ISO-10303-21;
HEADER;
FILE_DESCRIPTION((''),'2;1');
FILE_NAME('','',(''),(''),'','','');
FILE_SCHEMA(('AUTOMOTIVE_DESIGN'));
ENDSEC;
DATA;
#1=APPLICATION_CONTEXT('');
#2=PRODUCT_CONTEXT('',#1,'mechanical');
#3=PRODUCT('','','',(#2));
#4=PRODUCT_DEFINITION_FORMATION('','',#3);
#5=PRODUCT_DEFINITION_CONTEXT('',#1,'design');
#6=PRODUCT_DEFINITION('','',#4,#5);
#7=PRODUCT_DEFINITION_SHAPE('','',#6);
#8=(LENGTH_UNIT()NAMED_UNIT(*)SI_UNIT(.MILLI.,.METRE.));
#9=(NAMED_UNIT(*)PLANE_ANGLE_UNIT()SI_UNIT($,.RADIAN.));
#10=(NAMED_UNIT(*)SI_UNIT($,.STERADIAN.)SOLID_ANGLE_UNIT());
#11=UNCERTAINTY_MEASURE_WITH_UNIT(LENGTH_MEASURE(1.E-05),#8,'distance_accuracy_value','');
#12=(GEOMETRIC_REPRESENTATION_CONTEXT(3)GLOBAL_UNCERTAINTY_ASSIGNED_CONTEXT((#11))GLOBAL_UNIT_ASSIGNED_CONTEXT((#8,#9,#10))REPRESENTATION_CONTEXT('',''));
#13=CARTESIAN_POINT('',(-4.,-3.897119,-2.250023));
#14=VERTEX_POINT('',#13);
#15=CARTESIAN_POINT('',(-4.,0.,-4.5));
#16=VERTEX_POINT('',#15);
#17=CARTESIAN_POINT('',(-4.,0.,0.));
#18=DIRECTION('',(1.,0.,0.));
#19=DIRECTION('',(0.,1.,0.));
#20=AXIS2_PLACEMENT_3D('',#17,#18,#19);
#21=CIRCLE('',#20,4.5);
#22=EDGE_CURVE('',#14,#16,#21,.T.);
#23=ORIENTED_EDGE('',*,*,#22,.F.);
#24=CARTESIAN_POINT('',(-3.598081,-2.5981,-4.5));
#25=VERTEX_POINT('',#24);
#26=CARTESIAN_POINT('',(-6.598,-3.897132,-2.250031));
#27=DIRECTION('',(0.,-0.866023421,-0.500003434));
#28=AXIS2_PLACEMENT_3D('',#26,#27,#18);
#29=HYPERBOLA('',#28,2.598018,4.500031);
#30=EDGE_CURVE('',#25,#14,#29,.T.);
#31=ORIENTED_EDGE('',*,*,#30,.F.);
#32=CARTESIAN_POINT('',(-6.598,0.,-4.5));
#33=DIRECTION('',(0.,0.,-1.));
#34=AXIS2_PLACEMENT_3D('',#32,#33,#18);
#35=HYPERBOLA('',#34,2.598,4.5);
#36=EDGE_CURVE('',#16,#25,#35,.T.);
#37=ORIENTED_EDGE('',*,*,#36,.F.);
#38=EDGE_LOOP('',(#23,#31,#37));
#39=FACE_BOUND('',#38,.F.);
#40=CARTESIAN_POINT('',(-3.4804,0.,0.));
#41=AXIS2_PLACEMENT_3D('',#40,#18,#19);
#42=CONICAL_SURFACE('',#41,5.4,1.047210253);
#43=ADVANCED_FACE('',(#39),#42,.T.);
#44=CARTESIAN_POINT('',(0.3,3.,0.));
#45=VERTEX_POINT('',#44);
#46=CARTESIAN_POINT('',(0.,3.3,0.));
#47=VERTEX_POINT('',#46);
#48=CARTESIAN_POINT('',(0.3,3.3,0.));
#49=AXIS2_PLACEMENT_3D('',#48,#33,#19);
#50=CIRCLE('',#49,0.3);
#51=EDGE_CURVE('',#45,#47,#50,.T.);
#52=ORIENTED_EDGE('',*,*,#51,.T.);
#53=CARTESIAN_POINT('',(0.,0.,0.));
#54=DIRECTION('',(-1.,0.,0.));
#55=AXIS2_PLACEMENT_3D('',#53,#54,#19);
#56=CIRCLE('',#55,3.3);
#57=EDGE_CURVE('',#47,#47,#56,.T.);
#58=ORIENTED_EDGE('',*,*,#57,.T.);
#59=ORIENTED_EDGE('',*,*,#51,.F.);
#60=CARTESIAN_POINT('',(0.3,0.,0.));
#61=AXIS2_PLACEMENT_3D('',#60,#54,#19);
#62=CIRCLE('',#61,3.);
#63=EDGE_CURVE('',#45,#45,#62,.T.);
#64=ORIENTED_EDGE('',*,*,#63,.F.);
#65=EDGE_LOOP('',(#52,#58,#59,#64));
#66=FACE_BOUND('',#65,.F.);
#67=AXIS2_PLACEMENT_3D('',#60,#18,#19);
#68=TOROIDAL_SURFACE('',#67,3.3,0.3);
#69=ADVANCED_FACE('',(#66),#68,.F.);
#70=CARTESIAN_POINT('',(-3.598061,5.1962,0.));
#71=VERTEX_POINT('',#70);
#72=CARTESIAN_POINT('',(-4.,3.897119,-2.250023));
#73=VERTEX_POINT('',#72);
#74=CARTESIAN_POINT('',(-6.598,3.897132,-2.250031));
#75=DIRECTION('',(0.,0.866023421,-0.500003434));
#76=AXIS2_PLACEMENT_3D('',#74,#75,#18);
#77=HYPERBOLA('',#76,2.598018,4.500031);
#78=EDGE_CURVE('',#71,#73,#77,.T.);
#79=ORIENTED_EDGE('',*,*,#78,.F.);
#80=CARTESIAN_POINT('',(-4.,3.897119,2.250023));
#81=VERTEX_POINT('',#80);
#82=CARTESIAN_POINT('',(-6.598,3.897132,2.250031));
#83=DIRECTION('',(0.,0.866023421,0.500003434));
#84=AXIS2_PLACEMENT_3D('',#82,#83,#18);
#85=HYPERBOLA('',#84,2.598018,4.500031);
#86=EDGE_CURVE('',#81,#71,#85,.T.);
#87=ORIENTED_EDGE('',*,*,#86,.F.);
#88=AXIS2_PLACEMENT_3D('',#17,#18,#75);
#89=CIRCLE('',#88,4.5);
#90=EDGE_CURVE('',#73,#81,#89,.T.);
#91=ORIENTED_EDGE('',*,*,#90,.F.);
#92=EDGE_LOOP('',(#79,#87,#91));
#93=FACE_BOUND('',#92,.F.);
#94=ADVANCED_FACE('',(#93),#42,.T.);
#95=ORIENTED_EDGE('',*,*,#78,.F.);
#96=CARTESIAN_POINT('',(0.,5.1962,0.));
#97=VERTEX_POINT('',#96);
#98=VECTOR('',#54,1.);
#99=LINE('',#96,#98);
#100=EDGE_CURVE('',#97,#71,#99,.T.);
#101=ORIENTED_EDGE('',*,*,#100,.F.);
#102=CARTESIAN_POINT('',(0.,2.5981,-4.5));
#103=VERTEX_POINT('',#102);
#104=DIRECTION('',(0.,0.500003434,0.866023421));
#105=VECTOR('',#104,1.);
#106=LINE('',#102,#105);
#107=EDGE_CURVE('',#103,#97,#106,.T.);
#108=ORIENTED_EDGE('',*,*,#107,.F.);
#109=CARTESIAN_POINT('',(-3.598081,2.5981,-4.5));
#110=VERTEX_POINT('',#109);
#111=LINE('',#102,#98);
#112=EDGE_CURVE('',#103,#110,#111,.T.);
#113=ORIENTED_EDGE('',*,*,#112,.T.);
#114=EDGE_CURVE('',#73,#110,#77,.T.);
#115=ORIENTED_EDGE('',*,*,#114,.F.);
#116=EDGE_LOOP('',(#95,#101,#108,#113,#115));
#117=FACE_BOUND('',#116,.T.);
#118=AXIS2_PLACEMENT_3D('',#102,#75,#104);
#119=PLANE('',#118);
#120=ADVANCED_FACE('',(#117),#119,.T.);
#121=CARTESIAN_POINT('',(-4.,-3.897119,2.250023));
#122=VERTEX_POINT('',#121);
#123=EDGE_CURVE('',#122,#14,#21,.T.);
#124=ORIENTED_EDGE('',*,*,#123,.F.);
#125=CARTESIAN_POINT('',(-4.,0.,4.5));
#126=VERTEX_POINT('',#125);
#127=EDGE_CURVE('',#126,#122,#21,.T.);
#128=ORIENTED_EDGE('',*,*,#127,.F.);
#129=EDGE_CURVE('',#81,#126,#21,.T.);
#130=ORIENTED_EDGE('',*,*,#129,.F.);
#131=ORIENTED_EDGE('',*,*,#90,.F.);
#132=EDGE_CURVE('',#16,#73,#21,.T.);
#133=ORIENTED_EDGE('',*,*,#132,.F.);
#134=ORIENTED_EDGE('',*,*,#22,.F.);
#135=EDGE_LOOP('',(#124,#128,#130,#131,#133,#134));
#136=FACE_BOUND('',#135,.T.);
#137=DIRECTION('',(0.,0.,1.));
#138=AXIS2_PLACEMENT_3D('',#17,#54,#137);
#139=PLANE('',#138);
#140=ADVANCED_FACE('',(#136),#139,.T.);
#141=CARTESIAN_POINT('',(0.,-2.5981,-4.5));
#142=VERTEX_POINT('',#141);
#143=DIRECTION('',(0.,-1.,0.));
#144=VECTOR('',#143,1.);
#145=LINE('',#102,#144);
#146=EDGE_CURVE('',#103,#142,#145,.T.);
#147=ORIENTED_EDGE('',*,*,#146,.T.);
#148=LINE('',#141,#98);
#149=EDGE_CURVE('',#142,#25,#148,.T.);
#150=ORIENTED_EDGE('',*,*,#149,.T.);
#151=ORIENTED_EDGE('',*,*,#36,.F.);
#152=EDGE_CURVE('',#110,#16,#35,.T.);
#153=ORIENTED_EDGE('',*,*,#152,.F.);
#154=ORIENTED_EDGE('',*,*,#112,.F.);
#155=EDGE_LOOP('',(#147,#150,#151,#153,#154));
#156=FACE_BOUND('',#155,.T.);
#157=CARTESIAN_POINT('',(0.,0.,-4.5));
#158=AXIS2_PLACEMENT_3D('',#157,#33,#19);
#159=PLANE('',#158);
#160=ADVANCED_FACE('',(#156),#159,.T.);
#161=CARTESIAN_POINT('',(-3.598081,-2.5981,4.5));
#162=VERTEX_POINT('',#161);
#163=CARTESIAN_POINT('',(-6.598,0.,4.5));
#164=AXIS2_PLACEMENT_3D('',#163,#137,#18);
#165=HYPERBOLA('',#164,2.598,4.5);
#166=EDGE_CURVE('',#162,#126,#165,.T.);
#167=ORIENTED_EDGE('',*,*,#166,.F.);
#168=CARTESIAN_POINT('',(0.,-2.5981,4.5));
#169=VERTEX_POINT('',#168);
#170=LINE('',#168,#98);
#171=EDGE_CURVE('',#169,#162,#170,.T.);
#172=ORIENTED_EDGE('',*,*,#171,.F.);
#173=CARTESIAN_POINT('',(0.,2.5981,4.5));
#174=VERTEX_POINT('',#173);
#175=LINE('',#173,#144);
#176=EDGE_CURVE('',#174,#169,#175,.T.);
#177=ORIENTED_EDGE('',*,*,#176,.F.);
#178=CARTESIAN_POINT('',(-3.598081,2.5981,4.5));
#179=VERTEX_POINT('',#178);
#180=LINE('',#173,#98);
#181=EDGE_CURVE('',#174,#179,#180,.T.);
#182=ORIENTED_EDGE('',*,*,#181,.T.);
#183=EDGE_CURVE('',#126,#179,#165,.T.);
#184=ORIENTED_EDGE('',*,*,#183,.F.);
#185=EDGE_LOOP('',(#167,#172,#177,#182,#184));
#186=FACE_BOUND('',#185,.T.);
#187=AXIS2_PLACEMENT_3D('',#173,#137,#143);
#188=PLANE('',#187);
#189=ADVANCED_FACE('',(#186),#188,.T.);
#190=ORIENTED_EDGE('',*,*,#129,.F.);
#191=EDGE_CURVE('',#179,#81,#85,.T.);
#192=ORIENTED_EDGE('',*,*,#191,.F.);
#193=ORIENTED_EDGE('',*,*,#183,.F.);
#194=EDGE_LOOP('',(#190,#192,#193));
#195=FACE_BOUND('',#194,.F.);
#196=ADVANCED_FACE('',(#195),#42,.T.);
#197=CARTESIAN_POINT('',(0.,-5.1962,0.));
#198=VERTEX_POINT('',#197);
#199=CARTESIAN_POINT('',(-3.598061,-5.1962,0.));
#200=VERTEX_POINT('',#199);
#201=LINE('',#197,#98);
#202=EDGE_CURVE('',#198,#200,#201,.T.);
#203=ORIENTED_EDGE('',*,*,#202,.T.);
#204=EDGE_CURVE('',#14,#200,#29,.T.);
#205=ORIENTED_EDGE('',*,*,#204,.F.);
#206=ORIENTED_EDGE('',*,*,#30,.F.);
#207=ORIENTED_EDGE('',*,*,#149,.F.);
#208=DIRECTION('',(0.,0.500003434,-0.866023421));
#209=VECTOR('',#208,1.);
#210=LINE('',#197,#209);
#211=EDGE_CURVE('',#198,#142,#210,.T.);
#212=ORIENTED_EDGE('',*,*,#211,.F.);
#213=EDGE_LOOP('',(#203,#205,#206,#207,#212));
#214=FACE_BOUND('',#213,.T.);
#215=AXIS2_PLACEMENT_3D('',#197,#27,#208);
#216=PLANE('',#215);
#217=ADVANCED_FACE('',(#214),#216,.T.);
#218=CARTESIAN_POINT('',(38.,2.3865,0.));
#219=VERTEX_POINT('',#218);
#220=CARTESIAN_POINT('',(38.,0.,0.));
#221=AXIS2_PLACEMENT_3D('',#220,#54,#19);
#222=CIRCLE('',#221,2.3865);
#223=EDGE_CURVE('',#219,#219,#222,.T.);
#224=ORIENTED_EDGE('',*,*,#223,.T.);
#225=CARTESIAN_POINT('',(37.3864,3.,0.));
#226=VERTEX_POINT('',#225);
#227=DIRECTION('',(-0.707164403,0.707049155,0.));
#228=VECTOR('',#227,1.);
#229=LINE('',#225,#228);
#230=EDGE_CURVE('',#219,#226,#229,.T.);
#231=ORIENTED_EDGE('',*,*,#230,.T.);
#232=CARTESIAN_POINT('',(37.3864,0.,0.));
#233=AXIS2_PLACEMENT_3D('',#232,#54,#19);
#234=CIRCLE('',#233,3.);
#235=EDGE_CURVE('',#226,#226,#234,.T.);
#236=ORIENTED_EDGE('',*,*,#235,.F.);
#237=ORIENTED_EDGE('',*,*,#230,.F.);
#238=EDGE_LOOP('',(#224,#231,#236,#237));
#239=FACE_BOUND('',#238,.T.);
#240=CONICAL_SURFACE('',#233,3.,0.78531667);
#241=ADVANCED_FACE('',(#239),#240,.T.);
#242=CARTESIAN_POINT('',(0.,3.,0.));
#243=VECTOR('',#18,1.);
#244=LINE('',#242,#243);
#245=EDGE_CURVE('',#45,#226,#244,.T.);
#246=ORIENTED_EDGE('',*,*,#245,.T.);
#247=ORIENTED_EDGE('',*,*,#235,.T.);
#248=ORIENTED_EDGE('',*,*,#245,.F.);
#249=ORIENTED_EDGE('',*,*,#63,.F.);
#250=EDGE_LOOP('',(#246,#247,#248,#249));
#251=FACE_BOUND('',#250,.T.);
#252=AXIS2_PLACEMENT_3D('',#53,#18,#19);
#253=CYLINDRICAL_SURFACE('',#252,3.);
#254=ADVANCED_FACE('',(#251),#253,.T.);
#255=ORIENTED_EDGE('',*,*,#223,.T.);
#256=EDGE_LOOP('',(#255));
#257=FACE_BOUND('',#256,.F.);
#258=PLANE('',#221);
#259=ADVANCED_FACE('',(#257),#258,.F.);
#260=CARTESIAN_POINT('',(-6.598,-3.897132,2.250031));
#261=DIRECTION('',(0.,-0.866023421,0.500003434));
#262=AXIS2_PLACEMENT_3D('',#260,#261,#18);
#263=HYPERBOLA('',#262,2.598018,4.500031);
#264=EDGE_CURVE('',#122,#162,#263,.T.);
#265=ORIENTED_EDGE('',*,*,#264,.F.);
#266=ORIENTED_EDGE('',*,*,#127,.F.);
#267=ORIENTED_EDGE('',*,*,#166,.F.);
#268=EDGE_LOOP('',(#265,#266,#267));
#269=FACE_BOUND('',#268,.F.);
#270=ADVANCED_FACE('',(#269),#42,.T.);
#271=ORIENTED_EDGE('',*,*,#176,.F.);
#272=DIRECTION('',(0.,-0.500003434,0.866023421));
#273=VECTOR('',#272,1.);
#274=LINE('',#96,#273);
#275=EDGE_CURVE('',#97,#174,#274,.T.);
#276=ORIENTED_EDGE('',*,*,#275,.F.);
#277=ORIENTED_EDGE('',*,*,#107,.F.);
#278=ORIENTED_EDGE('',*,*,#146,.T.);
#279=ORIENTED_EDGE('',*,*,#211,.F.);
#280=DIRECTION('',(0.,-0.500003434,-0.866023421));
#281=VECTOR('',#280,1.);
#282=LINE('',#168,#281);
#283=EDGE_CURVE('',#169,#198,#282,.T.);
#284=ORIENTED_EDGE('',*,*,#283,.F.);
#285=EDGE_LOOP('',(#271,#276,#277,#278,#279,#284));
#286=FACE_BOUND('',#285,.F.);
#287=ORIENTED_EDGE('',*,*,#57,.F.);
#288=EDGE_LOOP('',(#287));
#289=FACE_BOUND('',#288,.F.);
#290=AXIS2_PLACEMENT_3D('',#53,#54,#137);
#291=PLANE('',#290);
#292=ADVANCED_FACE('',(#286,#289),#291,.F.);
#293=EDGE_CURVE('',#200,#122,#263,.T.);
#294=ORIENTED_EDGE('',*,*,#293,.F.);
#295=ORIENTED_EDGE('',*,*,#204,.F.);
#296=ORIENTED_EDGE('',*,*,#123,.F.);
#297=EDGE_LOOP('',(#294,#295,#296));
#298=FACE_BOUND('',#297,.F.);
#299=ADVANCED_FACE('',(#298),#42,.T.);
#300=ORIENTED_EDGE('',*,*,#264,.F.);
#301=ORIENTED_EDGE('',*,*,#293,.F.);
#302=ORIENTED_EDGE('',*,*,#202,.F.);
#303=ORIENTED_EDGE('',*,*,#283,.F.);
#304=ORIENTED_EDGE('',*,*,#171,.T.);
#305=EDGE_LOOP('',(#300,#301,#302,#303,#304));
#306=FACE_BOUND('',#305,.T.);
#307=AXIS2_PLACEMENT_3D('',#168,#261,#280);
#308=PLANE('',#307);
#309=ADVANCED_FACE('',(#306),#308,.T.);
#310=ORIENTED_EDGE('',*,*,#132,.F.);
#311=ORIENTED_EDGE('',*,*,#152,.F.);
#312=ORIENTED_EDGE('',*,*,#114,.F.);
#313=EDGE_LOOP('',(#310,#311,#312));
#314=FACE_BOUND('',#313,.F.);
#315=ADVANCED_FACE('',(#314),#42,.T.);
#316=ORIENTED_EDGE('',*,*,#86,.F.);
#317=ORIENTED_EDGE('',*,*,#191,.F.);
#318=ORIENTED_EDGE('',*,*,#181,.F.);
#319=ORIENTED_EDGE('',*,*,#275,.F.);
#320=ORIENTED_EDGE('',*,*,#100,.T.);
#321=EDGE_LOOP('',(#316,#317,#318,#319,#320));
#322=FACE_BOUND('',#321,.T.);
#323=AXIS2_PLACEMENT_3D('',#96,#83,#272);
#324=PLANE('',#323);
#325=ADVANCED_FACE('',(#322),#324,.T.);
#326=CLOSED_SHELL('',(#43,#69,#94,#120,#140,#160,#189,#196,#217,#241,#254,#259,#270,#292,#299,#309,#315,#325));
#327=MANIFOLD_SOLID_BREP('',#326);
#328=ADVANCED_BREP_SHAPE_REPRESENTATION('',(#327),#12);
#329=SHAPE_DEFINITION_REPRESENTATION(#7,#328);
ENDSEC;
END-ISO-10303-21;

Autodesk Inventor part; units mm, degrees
ref_plane "YZ Plane" through (0, 0, 0) normal (1, 0, 0) x (0, 1, 0)
ref_plane "XZ Plane" through (0, 0, 0) normal (0, 1, 0) x (-1, 0, 0)
sketch "Sketch1" plane through (0, 0, 0) normal (0, 0, 1) x (1, 0, 0)
  line L0 (0, 3) -> (38, 3)
  line L1 (38, 3) -> (38, 0)
  line L2 (38, 0) -> (0, 0)
  line L3 (-7.6, 0) -> (45.6, 0) projected
  line L4 (0, -0.6) -> (0, 3.6) projected
  line L5 (0, 3) -> (0, 0)
  dimension "d2" = 6
  dimension "d59" = 38
revolve "Body" add sketch "Sketch1" angle 360 about axis through (38, 0, 0) along (-1, 0, 0)
sketch "Sketch2" plane through (0, 0, 0) normal (-1, 0, 0) x (0, 0, 1)
  line L0 (0, 5.1962) -> (4.5, 2.5981)
  line L1 (4.5, 2.5981) -> (4.5, -2.5981)
  line L2 (4.5, -2.5981) -> (0, -5.1962)
  line L3 (0, -5.1962) -> (-4.5, -2.5981)
  line L4 (-4.5, -2.5981) -> (-4.5, 2.5981)
  line L5 (-4.5, 2.5981) -> (0, 5.1962)
  line L6 (-6.3, 0) -> (6.3, 0) projected
  line L7 (0, 7.2746) -> (0, -7.2746) projected
  point P0 (0, 0)
  point P1 (0, 0)
  dimension "d11" = 9
extrude "Head" add sketch "Sketch2" along normal blind 4
sketch "Sketch4" plane through (0, 0, 0) normal (0, 0, 1) x (1, 0, 0)
  line L0 (-3.4804, 5.4) -> (-4, 4.5)
  line L1 (-1.1, 0) -> (-0.234, 0)
  line L2 (-4.7532, 0) -> (0.5192, 0) projected
  line L3 (-4, 5.4) -> (-3.4804, 5.4)
  line L4 (-4, 4.5) -> (-4, 5.4)
  line L5 (0, 6.48) -> (0, -1.08) projected
  dimension "d65" = 9
  dimension "d67" = 30
  dimension "d68" = 10.8
  dimension "d69" = 4
revolve "Chamfer1" cut sketch "Sketch4" angle 360 about axis through (-1.1, 0, 0) along (1, 0, 0)
thread "Thread" size "M6x1" class "6g" standard "ISO Metric profile" length 11
chamfer "Chamfer2" distance 0.6135 distance2 0.6136 1 edges at (38, -3, 0) measured on face at (38, 0.7485, -0.9828)
fillet "Fillet2" radius 0.3 1 edges at (0, -3, 0)
ref_plane "Work Plane1" through (1.525, 0, 0) normal (0, 0, 1) x (1, 0, 0)
equation "\"d71\" = RR"
equation "\"d11\" = SW"
equation "\"d3\" = KOH"
equation "\"d15\" = GEL"
equation "\"d6\" = -0.5 * SPD + 0.5 * GD"
equation "\"d2\" = GD"
equation "\"d59\" = NLG"
equation "\"d65\" = SW"
equation "\"d67\" = ANG1"
equation "\"d68\" = 1.2 * SW"
equation "\"d69\" = KOH"
equation "\"NLG\" = 38"
equation "\"GD\" = NND"
equation "\"BDM\" = NND"
equation "\"KOH\" = 4"
equation "\"GEL\" = 11"
equation "\"SW\" = 9"
equation "\"SW0\" = SW"
equation "\"SPD\" = NND - 1.2269 * PTC"
equation "\"SD2\" = NND"
equation "\"SD\" = 0"
equation "\"ANG1\" = 30deg"
equation "\"GAL\" = 0.61345 * PTC"
equation "\"GUL\" = 0.61345 * PTC"
equation "\"RR\" = 0.3"
equation "\"RR1\" = 0.1"
equation "\"GD1\" = THREADDIA - 1.2269 * PTC"
equation "\"THREADDIA\" = 6"
equation "\"TOA\" = 30deg"
equation "\"FAWI\" = 60deg"
equation "\"PTC\" = 1"
equation "\"NND\" = 6"
equation "\"E0\" = 1.155 * SW"
properties part number "STN 02 1201 - M6 x 38" material "Steel, Mild"
